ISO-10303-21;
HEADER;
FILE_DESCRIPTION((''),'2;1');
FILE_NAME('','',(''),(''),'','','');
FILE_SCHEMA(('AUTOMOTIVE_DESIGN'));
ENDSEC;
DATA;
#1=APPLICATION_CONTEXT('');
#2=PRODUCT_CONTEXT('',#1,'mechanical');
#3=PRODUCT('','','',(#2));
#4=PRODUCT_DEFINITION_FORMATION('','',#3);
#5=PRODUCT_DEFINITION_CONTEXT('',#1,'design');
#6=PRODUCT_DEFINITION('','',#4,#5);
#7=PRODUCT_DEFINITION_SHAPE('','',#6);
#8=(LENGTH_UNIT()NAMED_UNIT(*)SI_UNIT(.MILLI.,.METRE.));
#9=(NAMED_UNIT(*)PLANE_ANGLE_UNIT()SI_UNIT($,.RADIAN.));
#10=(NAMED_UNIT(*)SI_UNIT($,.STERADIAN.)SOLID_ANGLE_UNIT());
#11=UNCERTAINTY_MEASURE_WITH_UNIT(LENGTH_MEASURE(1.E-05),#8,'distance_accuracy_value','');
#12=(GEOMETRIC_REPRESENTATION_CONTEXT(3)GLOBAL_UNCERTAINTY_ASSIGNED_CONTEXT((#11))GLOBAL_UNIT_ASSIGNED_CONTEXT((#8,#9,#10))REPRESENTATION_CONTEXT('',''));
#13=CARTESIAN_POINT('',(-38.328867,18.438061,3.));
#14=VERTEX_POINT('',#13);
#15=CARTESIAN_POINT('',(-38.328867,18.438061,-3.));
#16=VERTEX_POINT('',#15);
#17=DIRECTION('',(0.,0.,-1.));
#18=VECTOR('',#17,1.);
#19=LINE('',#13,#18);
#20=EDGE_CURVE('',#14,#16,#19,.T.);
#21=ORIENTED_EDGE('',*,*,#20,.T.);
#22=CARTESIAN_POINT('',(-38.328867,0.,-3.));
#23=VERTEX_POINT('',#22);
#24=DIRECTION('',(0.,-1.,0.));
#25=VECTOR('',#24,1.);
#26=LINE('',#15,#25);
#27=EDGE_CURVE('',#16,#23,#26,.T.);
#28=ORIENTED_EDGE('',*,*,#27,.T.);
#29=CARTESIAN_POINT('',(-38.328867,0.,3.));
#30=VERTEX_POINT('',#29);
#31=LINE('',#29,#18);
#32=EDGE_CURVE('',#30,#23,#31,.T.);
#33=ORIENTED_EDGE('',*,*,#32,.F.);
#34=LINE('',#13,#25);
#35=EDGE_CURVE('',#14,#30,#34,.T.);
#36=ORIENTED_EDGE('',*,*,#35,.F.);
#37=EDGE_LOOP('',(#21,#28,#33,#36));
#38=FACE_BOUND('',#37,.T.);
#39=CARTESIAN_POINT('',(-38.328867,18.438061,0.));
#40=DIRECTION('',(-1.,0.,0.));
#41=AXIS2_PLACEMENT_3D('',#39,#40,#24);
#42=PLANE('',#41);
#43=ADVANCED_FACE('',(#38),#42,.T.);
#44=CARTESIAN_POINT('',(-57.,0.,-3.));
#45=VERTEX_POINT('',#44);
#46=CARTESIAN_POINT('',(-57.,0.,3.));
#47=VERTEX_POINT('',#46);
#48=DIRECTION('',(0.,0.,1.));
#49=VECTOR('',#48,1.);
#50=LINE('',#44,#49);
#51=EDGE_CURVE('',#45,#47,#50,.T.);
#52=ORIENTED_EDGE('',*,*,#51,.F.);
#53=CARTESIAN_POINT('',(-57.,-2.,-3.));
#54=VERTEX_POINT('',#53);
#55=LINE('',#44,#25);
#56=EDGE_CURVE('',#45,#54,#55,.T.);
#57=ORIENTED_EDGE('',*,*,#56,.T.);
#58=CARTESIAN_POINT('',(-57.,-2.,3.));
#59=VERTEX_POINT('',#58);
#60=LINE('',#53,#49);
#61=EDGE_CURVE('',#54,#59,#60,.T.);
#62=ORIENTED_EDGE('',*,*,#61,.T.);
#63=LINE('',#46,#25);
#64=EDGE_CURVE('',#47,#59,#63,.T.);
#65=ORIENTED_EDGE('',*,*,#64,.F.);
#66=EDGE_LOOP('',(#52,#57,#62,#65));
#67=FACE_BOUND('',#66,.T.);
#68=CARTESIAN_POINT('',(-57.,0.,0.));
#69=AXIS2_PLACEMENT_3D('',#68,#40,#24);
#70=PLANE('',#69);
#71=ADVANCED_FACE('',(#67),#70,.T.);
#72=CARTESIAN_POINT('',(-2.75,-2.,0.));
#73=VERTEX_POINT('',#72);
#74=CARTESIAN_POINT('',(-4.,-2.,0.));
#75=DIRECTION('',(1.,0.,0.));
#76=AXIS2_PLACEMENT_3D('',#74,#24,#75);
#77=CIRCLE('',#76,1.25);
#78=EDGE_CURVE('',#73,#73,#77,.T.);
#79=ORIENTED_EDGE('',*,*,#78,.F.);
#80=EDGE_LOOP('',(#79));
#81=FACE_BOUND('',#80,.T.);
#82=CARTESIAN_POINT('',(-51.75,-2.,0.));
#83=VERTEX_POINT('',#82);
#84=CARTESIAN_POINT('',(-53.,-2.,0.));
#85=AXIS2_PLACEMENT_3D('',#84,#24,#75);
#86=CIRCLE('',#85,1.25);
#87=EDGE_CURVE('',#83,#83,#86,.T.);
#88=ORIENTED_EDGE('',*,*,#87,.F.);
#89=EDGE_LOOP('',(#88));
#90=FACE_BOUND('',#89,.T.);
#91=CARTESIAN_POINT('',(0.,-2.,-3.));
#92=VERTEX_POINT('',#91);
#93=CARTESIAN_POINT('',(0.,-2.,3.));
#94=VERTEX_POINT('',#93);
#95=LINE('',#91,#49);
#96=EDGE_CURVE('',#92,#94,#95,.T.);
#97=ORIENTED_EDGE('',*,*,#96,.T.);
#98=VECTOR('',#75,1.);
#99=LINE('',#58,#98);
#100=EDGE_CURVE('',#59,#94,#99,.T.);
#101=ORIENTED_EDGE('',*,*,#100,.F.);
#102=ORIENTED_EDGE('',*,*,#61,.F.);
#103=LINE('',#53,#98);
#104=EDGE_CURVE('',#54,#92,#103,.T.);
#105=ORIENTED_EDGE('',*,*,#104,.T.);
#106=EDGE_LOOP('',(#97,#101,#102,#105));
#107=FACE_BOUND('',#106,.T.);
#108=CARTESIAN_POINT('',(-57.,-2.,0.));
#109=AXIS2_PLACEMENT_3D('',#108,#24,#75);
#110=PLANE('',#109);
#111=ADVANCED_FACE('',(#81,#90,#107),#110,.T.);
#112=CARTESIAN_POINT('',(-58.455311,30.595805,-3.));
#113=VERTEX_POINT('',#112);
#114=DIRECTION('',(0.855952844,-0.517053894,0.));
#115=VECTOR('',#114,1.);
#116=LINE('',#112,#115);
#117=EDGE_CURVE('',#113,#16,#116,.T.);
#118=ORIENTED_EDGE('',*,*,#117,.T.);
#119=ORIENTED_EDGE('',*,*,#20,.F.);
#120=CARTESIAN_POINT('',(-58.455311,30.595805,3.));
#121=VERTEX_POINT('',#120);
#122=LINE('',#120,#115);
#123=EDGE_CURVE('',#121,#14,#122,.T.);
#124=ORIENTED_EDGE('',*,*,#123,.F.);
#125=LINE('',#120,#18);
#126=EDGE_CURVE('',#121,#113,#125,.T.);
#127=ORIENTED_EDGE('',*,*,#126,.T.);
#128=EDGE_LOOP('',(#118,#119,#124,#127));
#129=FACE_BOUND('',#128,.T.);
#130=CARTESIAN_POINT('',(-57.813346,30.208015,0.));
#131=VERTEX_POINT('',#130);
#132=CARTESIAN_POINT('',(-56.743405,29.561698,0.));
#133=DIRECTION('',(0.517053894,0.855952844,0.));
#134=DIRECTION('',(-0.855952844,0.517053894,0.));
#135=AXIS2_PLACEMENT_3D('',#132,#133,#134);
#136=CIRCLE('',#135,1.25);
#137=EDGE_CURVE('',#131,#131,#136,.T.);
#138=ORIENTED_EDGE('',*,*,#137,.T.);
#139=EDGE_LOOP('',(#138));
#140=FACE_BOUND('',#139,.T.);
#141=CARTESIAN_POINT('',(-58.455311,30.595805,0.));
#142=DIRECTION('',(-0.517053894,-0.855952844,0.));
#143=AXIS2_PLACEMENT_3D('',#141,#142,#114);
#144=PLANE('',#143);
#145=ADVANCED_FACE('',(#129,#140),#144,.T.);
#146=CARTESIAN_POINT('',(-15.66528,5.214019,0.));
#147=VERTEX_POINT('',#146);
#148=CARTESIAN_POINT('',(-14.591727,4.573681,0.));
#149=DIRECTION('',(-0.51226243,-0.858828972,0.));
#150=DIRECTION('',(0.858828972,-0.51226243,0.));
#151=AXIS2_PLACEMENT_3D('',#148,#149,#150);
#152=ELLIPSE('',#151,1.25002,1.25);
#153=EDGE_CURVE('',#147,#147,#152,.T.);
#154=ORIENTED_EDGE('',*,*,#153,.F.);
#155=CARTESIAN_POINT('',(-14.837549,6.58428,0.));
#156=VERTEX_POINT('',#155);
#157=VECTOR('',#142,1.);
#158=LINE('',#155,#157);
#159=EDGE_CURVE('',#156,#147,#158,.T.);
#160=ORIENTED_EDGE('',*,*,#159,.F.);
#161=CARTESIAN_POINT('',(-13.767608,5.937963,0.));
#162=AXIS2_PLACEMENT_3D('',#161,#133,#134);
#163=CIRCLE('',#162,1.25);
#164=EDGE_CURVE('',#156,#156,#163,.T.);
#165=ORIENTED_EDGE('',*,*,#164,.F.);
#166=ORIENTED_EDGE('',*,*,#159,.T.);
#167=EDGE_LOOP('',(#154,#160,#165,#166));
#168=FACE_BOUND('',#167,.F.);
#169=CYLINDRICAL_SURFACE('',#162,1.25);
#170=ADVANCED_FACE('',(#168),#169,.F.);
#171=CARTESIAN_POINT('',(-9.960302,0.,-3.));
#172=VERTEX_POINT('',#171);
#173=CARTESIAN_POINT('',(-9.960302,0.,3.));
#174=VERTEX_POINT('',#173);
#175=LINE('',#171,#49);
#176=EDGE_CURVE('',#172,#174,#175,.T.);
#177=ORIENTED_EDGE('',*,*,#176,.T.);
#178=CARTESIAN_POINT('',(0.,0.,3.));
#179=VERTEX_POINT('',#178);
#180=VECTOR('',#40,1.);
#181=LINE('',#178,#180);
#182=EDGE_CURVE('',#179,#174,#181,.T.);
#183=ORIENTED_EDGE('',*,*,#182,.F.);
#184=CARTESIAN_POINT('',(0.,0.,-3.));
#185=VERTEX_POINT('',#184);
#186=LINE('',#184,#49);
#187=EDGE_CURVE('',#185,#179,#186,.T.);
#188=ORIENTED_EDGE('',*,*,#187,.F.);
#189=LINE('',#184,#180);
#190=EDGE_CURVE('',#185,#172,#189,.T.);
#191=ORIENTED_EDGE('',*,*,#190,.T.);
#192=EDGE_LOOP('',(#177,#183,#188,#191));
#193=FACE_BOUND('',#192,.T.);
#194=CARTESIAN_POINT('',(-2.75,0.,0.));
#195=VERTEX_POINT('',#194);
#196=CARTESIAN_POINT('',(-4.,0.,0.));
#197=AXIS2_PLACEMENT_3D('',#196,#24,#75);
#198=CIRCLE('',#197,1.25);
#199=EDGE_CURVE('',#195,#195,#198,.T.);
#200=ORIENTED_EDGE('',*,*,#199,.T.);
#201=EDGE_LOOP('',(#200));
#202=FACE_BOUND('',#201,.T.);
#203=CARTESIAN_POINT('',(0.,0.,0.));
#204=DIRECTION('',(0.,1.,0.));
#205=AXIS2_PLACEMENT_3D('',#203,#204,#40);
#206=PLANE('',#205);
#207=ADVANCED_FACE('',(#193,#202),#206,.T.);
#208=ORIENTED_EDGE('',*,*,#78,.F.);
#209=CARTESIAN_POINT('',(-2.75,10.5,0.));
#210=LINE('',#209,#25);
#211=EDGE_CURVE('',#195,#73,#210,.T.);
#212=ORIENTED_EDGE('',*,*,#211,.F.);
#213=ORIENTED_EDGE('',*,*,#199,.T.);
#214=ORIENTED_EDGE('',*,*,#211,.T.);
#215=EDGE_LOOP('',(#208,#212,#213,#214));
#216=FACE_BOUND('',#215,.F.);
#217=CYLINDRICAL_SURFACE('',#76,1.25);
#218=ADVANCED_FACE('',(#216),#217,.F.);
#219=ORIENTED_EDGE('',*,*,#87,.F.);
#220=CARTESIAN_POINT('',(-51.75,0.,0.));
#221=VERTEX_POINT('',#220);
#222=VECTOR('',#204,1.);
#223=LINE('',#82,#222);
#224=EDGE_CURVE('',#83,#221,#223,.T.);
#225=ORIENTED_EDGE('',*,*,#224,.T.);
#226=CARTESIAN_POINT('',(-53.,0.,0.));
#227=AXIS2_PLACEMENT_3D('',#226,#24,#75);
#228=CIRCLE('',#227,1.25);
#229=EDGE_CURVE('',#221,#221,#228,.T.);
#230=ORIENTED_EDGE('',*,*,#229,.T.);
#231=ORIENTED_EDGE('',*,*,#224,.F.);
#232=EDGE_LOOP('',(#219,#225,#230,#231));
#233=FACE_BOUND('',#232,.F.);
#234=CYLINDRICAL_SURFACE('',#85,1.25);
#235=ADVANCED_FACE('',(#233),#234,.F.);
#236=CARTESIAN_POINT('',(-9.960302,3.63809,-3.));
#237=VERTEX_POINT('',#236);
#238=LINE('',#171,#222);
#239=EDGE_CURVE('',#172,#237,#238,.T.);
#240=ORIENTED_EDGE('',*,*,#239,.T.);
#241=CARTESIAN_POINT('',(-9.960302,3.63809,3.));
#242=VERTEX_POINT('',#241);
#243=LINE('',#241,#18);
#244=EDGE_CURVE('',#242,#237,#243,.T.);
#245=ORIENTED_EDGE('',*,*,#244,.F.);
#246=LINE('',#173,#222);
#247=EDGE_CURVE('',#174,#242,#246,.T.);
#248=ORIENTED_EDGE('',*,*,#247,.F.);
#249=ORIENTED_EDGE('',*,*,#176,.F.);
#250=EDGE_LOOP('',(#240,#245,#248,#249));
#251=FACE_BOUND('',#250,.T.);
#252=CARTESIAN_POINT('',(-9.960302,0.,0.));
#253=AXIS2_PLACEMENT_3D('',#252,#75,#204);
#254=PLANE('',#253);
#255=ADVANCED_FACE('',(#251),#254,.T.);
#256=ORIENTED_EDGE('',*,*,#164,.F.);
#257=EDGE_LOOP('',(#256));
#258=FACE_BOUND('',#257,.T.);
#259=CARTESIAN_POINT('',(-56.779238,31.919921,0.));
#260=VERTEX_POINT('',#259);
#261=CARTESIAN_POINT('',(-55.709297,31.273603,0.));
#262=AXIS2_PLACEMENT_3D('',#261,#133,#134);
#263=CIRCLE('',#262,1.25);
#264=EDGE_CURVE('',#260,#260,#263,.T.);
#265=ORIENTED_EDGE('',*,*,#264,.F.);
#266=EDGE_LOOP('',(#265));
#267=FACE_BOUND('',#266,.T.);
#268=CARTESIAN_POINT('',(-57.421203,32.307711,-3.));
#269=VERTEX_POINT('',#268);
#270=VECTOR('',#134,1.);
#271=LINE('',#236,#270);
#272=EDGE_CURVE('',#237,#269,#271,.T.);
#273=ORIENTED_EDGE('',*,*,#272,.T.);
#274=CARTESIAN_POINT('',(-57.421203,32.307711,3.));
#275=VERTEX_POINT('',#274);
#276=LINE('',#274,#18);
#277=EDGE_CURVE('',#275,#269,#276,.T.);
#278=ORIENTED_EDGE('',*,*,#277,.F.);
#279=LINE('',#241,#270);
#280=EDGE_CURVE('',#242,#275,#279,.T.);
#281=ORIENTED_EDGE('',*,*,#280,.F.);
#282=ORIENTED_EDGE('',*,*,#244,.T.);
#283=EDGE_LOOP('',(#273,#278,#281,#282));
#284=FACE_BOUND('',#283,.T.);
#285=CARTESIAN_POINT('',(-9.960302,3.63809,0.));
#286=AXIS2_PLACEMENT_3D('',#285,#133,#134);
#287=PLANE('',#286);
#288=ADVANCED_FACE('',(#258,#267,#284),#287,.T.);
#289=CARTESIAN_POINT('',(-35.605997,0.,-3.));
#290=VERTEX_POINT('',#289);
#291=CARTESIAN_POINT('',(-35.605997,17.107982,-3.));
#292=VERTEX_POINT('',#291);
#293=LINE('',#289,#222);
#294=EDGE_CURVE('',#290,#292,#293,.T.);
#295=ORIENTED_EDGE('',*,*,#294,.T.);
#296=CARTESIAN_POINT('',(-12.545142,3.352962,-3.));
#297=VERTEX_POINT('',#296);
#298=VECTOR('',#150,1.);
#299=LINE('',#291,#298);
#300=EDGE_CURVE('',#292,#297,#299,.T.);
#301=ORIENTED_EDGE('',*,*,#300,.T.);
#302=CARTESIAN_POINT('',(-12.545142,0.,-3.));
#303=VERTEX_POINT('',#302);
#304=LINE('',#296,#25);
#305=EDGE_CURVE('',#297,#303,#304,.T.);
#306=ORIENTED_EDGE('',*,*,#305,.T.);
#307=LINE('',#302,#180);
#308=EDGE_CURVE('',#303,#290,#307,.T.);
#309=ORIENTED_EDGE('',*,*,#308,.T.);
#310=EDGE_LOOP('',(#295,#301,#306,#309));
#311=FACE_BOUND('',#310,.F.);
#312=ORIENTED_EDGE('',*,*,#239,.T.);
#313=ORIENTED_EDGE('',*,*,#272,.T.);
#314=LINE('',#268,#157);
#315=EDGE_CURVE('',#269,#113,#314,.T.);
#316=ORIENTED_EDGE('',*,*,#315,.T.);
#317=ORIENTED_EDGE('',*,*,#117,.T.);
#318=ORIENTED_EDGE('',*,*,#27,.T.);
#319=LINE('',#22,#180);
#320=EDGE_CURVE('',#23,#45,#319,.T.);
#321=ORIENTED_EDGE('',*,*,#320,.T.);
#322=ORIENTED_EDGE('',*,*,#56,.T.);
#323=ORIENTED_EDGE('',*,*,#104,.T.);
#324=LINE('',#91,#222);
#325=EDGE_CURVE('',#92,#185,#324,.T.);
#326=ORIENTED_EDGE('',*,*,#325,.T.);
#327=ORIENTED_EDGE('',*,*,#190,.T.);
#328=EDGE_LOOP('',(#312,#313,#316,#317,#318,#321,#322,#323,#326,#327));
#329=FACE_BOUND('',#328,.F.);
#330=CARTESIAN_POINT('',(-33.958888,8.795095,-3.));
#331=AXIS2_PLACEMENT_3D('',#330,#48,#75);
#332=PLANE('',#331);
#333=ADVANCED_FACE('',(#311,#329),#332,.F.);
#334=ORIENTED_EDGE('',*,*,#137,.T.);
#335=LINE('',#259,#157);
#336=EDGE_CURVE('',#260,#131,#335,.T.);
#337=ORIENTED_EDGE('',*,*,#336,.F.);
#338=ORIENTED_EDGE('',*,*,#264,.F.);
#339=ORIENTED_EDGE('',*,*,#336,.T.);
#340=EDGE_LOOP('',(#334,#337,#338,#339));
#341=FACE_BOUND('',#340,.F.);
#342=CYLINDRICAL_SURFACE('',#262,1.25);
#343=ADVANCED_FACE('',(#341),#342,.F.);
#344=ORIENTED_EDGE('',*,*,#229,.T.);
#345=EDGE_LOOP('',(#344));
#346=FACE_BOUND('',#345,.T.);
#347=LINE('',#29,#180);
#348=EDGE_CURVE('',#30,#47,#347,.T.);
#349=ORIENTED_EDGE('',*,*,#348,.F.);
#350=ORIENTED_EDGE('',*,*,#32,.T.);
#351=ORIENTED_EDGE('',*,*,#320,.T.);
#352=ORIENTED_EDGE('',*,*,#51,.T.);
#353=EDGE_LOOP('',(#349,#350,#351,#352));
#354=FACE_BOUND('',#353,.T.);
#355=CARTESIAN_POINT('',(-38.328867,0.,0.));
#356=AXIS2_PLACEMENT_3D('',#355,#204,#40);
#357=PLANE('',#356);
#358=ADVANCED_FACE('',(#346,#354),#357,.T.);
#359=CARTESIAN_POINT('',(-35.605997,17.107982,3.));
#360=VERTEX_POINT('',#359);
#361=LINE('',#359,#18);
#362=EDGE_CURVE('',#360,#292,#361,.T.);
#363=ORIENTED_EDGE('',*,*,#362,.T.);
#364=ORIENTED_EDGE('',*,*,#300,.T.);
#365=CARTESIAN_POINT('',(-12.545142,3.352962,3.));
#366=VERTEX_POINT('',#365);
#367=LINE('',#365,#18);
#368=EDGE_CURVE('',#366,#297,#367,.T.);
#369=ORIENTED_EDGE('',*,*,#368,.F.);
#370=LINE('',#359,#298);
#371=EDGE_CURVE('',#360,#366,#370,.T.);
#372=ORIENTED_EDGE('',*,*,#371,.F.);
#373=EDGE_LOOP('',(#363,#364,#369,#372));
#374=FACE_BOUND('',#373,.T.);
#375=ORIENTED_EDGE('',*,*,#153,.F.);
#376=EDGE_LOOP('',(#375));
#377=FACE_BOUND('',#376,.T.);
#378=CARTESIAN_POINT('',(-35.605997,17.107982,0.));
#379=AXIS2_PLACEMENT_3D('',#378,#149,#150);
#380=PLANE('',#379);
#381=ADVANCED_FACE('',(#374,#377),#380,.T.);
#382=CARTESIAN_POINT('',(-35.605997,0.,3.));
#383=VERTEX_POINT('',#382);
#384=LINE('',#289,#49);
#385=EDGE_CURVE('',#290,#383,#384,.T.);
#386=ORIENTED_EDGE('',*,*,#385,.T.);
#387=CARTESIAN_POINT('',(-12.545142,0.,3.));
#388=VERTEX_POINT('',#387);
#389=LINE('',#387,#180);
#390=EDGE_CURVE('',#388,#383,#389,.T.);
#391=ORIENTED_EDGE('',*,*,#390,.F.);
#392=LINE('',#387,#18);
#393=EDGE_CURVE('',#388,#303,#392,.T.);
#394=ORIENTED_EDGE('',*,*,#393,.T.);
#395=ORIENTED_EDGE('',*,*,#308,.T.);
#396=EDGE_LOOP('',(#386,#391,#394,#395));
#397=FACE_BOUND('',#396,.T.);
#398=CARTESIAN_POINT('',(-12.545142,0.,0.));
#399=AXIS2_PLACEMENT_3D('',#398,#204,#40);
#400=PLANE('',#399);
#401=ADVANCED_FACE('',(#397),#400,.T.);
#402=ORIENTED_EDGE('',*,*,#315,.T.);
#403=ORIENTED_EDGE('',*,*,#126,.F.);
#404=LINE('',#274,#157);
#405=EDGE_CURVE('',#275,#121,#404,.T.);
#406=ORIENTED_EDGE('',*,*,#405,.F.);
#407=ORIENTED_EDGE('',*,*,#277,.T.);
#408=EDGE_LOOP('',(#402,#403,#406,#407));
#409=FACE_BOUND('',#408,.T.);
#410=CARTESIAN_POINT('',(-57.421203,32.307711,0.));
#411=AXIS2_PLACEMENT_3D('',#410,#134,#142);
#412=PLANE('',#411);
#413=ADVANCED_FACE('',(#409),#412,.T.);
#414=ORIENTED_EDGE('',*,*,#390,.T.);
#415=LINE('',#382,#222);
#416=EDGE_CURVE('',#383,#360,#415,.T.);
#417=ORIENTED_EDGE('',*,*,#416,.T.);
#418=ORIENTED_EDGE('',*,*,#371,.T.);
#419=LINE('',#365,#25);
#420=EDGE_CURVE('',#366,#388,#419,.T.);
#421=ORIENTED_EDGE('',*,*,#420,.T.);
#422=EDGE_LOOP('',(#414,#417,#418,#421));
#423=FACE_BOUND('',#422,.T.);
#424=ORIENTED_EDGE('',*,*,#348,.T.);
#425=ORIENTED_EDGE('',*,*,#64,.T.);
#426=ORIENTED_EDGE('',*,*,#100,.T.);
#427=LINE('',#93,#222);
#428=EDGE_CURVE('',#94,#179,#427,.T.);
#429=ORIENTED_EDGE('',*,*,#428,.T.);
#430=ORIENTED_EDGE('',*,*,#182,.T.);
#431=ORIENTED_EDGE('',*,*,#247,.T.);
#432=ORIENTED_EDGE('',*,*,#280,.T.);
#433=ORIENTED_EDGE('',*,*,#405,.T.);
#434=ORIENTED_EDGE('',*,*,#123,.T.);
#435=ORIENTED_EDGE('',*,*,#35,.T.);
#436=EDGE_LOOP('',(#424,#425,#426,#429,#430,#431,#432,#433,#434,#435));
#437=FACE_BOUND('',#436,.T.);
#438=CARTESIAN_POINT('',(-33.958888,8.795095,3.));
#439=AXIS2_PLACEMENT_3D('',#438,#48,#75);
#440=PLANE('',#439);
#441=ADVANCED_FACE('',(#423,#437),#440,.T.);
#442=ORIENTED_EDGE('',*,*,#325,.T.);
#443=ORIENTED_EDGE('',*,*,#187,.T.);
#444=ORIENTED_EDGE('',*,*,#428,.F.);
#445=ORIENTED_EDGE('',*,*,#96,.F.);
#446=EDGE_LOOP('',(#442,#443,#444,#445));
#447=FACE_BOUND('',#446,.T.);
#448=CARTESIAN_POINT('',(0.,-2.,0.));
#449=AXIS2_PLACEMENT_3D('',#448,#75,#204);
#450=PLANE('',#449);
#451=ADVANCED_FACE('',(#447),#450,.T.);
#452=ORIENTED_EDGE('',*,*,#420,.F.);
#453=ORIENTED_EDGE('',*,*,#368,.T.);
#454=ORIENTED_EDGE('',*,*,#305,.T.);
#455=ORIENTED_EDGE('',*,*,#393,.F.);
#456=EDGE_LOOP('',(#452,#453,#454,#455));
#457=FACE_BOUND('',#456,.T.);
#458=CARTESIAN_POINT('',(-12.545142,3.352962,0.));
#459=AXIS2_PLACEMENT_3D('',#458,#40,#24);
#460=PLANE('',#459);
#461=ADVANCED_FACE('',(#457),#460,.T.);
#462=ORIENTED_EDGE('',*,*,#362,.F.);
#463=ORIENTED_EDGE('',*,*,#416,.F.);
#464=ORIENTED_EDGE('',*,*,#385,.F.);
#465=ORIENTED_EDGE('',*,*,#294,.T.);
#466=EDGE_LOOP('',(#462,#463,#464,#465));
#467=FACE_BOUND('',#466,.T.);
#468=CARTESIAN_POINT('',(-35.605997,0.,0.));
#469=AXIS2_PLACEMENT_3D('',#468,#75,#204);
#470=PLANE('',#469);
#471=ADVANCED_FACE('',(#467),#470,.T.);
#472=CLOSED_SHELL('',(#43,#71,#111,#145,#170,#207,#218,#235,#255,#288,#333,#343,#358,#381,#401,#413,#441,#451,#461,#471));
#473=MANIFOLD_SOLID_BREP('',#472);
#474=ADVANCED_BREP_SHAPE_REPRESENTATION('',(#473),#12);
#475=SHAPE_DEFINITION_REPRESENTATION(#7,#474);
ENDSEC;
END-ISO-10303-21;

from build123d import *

# Parameters (mm, degrees)
F1_DEPTH = 3
F2_R     = 1.25
F3_DEPTH = 12.5
F4_R     = 1.25
F5_DEPTH = 4


# Not quite as in the source:
# - a feature names something its author has since deleted; it is built from what else it names


with BuildPart() as f1:
    # F0 (on Top) → F1 (new body, symmetric)
    with BuildSketch(Plane.XY):
        Polygon((-38.3288674057, 0), (-57, 0), (-57, -2), (0, -2), (0, 0), (-3.9376540358, 0), (-6.9237630814, 0), (-9.9603020251, 0), (-9.9603020251, 3.6380901354), (-57.4212029734, 32.3077111831), (-58.4553107619, 30.595805496), (-38.3288674057, 18.4380610677), align=None)
        Polygon((-35.6059968472, 0), (-35.6059968472, 17.1079821885), (-12.5451418841, 3.3529622977), (-12.5451418841, 0), align=None, mode=Mode.SUBTRACT)
    extrude(amount=F1_DEPTH, both=True)

    # F2 (on face) → F3 (cut, symmetric)
    with BuildSketch(Plane.XZ.offset(2)):
        with Locations((-53, 0)):
            Circle(F2_R)
        with Locations((-4, 0)):
            Circle(F2_R)
    extrude(amount=F3_DEPTH, both=True, mode=Mode.SUBTRACT)

    # F4 (on face) → F5 (cut)
    with BuildSketch(Plane(origin=(-1.0527110533, -1.7427023171, 0), x_dir=(-0.8559528436, 0.5170538943, 0), z_dir=(0.5170538943, 0.8559528436, 0))):
        with Locations((63.8546698487, 0)):
            Circle(F4_R)
        with Locations((14.8546698487, 0)):
            Circle(F4_R)
    extrude(amount=-F5_DEPTH, mode=Mode.SUBTRACT)


solid = f1.part
